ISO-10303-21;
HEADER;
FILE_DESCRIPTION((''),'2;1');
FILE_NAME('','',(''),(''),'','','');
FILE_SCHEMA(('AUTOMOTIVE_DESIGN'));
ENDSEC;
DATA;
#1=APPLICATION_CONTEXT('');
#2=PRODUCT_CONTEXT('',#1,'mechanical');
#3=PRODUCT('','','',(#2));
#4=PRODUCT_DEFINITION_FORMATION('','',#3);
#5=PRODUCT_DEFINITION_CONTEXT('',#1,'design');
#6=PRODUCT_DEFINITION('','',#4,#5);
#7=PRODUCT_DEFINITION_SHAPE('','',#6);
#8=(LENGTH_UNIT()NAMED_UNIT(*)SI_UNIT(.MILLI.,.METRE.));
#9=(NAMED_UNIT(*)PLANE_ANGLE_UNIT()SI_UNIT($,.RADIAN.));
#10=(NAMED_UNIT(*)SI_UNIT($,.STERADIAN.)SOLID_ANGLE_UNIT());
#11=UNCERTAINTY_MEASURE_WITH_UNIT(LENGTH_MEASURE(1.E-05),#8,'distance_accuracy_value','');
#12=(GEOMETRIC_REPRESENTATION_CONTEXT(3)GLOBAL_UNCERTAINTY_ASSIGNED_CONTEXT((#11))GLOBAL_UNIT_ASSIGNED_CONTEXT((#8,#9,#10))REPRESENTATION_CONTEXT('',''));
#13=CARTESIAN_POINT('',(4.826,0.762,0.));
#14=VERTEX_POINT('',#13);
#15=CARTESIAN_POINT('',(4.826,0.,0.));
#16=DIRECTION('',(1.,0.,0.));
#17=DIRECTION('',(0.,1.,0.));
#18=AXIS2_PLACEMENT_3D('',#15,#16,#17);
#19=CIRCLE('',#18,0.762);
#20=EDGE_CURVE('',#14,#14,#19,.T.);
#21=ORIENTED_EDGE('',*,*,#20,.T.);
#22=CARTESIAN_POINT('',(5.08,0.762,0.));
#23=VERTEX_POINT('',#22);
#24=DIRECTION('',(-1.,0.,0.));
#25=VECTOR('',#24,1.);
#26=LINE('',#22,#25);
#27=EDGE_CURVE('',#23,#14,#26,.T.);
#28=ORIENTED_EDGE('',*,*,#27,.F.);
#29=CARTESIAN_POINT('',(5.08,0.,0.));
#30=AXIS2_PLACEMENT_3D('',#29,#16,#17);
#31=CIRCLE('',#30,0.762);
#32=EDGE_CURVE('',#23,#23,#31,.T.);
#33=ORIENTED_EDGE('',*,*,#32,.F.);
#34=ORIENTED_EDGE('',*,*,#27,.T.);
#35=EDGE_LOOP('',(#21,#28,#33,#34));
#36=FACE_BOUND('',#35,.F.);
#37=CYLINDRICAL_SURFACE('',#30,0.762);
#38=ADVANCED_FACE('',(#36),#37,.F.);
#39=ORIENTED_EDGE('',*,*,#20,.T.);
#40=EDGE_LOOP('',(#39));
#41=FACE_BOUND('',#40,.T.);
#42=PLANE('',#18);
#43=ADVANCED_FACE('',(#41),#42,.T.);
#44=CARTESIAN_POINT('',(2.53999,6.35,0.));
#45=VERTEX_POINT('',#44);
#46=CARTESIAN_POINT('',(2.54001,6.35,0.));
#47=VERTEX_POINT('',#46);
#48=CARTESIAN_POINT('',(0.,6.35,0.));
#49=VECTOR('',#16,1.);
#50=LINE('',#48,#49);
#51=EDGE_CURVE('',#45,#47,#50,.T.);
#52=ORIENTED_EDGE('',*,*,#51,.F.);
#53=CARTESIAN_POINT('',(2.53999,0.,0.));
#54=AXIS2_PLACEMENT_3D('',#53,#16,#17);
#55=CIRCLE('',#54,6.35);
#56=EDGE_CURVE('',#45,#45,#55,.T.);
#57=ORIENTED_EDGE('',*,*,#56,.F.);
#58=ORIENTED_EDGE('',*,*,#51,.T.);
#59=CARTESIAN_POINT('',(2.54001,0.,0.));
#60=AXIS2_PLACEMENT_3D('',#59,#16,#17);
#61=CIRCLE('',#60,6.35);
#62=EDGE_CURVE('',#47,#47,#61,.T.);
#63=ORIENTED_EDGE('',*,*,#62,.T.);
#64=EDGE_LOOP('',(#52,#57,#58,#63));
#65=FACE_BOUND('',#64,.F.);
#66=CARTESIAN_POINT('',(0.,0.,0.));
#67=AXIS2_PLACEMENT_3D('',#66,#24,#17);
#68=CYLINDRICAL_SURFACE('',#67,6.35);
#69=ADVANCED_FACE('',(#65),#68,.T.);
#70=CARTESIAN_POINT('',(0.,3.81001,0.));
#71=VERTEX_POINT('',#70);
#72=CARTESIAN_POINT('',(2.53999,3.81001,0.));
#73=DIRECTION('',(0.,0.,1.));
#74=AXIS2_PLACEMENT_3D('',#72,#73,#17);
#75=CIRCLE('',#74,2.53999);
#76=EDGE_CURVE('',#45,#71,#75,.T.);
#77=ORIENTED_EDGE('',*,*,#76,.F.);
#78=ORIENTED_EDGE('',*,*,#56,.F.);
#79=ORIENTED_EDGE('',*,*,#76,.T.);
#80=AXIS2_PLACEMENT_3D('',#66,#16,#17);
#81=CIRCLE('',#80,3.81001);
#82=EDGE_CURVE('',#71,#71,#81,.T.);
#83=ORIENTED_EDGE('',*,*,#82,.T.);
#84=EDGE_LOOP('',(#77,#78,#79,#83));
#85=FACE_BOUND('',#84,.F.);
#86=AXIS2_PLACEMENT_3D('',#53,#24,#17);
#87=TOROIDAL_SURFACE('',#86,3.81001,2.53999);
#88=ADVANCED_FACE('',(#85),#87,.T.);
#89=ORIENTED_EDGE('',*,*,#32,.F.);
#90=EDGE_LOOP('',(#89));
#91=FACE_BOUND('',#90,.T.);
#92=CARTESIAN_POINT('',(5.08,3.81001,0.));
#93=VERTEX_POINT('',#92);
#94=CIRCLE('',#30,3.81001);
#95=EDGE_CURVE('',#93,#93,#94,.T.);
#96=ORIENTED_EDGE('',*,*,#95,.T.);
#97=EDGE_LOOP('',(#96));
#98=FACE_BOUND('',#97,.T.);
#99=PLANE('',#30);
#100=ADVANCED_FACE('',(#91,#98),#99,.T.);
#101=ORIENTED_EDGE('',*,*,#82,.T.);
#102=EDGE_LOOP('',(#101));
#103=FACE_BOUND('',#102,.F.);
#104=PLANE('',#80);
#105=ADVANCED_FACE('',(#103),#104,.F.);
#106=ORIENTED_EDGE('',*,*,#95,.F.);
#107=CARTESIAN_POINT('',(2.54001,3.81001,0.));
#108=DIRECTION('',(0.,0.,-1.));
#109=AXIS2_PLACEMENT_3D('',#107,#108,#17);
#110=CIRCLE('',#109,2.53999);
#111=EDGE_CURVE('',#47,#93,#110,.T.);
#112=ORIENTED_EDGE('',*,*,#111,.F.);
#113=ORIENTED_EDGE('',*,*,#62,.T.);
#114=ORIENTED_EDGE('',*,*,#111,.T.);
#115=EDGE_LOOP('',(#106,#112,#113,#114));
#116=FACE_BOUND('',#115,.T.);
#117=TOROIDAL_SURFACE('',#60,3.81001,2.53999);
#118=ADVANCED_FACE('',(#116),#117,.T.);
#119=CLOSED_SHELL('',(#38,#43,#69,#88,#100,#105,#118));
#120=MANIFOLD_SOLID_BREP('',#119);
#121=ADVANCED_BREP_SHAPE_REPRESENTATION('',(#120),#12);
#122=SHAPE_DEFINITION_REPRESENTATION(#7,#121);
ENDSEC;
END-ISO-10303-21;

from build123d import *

# Parameters (mm, degrees)
F0_R     = 6.35
F1_DEPTH = 5.08
F2_R     = 2.53999
F3_R     = 0.762
F4_DEPTH = 0.254


# Not quite as in the source:
# - a fillet or chamfer is up to 0.001 mm smaller than in the source, because OpenCascade refuses the exact size


with BuildPart() as f1:
    # F0 (on Right) → F1 (new body)
    with BuildSketch(Plane.YZ):
        Circle(F0_R)
    extrude(amount=F1_DEPTH)

    # F2 (radius 2.54 in the source; OpenCascade refuses exactly that, so slightly less here)
    f2_edges = [f1.edges().sort_by_distance(p)[0] for p in [
        (5.08, -6.35, 0),
        (0, -6.35, 0),
    ]]
    fillet(f2_edges, radius=F2_R)

    # F3 (on face) → F4 (cut)
    with BuildSketch(Plane.YZ.offset(5.08)):
        Circle(F3_R)
    extrude(amount=-F4_DEPTH, mode=Mode.SUBTRACT)


solid = f1.part
